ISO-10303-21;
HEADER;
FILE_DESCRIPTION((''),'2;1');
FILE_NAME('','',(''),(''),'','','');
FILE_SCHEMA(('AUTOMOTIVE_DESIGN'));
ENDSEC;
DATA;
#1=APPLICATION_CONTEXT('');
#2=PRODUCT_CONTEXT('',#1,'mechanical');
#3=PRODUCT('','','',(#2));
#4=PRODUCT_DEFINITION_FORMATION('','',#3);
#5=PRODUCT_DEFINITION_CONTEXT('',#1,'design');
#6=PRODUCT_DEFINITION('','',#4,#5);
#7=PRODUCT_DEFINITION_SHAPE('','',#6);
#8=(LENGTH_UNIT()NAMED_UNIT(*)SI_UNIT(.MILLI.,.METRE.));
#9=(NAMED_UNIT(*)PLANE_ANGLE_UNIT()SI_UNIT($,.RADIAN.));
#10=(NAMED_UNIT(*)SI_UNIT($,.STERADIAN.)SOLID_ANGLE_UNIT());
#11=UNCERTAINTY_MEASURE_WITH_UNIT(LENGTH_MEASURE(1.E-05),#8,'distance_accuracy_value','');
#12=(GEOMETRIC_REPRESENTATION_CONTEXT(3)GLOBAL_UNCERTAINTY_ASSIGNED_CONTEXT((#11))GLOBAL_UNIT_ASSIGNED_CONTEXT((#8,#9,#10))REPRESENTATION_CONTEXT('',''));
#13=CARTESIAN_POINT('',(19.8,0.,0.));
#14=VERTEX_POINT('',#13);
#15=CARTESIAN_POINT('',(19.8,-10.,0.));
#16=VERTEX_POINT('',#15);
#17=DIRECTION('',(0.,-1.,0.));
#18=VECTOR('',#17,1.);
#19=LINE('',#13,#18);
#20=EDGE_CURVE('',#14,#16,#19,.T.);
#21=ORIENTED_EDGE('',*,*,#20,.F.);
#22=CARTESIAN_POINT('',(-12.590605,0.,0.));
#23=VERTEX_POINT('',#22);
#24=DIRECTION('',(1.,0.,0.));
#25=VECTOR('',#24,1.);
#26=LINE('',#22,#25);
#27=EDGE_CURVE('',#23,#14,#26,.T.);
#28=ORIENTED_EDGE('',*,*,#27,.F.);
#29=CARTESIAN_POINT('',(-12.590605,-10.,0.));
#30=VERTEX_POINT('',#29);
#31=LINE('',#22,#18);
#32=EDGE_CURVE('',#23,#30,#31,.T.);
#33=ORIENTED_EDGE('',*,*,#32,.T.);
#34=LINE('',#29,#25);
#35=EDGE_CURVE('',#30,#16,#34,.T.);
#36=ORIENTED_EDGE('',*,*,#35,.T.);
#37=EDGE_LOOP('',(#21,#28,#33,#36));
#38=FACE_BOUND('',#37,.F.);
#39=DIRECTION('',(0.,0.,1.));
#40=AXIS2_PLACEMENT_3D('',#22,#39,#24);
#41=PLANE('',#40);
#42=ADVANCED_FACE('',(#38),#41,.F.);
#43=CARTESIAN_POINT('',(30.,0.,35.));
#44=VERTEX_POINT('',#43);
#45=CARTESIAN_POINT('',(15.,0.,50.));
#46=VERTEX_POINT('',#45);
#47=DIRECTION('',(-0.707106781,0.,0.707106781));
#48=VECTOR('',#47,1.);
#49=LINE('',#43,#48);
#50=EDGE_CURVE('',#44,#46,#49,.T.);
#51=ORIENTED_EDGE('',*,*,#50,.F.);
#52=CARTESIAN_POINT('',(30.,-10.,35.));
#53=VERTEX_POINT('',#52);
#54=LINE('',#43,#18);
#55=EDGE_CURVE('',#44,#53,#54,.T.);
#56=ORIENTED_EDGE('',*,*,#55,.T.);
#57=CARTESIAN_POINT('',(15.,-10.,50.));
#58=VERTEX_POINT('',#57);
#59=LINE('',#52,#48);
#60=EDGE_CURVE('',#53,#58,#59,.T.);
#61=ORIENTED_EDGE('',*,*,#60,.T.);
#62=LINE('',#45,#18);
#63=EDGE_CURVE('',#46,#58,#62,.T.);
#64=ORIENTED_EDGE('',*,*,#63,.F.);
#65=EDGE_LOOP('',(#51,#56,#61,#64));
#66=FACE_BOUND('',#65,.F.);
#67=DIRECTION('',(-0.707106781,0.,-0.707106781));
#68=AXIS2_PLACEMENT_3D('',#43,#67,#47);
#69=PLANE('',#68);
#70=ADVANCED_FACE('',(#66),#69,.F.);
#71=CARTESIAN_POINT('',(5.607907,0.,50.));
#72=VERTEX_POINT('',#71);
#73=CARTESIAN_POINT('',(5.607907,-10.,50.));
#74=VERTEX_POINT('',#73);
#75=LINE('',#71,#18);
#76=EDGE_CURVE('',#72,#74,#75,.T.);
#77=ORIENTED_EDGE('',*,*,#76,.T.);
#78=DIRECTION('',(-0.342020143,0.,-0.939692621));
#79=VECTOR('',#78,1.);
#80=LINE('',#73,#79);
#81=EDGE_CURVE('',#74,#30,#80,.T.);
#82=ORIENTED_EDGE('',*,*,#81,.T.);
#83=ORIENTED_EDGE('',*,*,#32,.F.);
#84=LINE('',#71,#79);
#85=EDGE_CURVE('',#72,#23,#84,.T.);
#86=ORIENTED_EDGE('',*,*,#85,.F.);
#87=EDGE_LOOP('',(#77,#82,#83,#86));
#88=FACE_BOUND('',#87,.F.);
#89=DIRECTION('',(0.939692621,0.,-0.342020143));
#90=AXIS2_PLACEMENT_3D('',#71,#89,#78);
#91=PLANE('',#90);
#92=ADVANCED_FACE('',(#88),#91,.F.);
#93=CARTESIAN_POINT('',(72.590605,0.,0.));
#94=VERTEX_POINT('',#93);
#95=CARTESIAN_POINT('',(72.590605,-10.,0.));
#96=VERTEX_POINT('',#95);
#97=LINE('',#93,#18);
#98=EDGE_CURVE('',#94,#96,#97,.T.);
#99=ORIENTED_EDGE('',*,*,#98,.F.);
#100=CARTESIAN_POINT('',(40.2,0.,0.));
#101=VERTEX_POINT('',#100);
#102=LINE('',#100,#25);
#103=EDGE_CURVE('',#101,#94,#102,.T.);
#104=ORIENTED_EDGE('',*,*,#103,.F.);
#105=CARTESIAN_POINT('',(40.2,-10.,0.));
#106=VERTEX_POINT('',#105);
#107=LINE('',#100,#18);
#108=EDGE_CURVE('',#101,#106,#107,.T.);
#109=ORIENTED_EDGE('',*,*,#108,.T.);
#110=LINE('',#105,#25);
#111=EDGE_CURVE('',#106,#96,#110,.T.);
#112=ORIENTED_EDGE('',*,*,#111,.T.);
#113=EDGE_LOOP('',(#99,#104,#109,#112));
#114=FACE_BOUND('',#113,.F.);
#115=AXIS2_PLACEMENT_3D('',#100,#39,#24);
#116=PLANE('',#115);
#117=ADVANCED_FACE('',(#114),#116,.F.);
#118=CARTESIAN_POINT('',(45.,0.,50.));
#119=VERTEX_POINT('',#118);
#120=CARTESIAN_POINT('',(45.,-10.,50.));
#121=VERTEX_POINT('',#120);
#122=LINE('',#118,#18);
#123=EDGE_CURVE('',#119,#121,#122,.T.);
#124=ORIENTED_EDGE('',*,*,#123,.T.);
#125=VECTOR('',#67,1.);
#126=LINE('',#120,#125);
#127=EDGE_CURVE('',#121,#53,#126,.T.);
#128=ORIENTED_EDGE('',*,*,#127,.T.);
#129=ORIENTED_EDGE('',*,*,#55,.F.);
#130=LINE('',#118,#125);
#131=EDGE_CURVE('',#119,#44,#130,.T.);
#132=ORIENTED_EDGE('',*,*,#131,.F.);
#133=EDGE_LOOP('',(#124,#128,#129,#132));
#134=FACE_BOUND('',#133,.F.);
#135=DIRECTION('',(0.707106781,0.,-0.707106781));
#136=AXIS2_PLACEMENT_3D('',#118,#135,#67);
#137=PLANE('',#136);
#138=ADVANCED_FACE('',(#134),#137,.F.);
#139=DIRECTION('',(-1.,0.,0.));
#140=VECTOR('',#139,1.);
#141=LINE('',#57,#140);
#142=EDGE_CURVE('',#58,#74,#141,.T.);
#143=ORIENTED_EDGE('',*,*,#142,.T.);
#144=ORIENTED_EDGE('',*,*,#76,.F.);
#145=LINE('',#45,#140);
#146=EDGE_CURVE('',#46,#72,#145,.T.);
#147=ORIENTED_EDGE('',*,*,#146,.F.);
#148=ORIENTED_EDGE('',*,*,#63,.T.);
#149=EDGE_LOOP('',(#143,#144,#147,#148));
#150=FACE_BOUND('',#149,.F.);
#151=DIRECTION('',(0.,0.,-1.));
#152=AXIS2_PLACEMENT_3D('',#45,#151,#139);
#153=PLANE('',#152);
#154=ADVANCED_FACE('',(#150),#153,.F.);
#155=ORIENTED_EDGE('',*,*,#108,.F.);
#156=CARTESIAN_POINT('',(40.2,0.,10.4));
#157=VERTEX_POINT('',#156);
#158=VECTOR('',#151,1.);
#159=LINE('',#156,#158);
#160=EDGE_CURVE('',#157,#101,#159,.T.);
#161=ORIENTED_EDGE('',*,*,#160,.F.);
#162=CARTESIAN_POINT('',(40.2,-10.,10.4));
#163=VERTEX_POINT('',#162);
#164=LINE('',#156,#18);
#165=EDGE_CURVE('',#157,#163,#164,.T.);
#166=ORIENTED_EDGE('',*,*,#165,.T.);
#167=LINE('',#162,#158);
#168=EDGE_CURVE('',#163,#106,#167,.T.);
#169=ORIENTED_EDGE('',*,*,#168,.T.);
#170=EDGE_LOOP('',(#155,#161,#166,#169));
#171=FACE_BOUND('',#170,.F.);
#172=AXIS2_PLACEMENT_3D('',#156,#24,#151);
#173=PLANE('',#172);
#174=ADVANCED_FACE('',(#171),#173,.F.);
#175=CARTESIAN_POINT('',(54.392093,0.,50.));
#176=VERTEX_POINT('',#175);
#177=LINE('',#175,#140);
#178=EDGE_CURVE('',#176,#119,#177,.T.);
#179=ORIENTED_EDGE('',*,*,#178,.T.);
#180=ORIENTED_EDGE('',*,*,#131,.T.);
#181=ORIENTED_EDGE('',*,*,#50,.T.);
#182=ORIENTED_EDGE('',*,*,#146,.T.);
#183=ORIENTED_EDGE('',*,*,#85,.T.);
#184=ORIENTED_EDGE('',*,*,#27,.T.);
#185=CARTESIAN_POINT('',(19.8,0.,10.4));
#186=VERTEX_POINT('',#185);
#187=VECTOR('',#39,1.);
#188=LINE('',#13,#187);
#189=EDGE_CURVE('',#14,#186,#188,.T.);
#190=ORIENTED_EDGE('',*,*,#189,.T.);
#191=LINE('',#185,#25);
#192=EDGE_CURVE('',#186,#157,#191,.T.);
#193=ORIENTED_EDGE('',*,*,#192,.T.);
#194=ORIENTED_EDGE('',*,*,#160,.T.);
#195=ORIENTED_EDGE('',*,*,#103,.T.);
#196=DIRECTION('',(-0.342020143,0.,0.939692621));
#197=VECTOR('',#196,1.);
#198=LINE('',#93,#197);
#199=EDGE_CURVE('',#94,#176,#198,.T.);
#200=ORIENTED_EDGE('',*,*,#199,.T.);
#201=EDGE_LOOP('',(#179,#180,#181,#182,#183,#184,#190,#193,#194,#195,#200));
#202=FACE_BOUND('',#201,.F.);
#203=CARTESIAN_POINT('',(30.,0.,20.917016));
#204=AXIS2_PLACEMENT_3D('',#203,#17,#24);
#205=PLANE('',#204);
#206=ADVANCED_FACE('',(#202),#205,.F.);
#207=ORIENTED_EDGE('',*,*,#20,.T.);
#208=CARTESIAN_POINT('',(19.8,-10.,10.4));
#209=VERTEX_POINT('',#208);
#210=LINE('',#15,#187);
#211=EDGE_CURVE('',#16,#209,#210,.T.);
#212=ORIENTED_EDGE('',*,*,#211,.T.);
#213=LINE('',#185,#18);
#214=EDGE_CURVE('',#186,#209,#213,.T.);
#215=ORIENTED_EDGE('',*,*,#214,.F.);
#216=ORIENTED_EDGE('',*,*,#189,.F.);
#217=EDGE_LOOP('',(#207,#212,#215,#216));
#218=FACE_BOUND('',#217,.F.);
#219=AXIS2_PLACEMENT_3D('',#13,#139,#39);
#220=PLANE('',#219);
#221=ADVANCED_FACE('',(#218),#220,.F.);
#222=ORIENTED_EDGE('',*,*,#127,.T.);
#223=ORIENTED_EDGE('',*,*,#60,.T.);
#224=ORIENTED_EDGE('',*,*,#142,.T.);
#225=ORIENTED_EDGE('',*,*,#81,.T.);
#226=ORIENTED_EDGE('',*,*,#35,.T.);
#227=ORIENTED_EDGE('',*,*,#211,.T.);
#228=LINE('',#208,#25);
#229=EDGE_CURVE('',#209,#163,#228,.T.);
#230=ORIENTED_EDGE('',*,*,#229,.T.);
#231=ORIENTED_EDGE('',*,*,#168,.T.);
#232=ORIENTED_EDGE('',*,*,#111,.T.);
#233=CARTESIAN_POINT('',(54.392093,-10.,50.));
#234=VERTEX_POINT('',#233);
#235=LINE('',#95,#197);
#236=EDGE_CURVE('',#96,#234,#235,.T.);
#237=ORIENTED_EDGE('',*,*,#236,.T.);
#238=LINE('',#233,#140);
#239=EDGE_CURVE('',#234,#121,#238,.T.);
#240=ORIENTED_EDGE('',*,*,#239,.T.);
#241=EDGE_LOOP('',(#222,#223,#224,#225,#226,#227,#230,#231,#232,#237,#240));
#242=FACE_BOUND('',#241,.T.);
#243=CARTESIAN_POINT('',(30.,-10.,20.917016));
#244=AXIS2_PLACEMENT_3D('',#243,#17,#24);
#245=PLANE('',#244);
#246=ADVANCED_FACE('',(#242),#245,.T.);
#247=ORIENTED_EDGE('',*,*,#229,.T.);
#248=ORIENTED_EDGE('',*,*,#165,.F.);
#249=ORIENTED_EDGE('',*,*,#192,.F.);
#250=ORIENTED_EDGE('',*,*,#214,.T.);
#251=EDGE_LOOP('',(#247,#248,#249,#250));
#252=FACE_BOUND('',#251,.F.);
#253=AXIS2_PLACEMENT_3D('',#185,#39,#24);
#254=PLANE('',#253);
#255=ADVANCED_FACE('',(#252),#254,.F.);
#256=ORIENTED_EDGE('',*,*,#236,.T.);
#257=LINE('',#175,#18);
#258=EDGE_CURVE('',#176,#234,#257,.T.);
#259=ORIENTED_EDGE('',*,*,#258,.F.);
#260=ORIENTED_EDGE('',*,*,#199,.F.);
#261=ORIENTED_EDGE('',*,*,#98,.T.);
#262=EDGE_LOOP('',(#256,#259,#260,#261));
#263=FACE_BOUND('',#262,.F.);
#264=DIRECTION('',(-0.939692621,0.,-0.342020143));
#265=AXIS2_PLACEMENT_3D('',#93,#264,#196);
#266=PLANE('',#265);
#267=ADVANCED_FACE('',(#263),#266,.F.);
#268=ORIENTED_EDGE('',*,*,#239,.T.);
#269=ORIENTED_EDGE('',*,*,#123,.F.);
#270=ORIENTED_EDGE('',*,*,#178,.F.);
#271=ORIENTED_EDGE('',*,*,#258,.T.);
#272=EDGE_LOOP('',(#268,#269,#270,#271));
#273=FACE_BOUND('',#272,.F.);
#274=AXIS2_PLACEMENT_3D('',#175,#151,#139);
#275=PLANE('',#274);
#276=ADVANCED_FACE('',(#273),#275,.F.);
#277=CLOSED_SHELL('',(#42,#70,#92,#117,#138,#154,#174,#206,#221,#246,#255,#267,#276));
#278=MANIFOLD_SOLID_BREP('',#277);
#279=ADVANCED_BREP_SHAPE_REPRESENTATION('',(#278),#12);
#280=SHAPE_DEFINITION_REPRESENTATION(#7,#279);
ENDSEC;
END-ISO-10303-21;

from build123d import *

# Parameters (mm, degrees)
F1_DEPTH = 10


# Not quite as in the source:
# - a feature names something its author has since deleted; it is built from what else it names


with BuildPart() as f1:
    # F0 (on Front) → F1 (new body)
    with BuildSketch(Plane.XZ):
        Polygon((15, 50), (5.6079070177, 50), (-12.5906046956, 0), (19.8, 0), (19.8, 10.4), (40.2, 10.4), (40.2, 0), (72.5906046956, 0), (54.3920929823, 50), (45, 50), (30, 35), align=None)
    extrude(amount=F1_DEPTH)


solid = f1.part
